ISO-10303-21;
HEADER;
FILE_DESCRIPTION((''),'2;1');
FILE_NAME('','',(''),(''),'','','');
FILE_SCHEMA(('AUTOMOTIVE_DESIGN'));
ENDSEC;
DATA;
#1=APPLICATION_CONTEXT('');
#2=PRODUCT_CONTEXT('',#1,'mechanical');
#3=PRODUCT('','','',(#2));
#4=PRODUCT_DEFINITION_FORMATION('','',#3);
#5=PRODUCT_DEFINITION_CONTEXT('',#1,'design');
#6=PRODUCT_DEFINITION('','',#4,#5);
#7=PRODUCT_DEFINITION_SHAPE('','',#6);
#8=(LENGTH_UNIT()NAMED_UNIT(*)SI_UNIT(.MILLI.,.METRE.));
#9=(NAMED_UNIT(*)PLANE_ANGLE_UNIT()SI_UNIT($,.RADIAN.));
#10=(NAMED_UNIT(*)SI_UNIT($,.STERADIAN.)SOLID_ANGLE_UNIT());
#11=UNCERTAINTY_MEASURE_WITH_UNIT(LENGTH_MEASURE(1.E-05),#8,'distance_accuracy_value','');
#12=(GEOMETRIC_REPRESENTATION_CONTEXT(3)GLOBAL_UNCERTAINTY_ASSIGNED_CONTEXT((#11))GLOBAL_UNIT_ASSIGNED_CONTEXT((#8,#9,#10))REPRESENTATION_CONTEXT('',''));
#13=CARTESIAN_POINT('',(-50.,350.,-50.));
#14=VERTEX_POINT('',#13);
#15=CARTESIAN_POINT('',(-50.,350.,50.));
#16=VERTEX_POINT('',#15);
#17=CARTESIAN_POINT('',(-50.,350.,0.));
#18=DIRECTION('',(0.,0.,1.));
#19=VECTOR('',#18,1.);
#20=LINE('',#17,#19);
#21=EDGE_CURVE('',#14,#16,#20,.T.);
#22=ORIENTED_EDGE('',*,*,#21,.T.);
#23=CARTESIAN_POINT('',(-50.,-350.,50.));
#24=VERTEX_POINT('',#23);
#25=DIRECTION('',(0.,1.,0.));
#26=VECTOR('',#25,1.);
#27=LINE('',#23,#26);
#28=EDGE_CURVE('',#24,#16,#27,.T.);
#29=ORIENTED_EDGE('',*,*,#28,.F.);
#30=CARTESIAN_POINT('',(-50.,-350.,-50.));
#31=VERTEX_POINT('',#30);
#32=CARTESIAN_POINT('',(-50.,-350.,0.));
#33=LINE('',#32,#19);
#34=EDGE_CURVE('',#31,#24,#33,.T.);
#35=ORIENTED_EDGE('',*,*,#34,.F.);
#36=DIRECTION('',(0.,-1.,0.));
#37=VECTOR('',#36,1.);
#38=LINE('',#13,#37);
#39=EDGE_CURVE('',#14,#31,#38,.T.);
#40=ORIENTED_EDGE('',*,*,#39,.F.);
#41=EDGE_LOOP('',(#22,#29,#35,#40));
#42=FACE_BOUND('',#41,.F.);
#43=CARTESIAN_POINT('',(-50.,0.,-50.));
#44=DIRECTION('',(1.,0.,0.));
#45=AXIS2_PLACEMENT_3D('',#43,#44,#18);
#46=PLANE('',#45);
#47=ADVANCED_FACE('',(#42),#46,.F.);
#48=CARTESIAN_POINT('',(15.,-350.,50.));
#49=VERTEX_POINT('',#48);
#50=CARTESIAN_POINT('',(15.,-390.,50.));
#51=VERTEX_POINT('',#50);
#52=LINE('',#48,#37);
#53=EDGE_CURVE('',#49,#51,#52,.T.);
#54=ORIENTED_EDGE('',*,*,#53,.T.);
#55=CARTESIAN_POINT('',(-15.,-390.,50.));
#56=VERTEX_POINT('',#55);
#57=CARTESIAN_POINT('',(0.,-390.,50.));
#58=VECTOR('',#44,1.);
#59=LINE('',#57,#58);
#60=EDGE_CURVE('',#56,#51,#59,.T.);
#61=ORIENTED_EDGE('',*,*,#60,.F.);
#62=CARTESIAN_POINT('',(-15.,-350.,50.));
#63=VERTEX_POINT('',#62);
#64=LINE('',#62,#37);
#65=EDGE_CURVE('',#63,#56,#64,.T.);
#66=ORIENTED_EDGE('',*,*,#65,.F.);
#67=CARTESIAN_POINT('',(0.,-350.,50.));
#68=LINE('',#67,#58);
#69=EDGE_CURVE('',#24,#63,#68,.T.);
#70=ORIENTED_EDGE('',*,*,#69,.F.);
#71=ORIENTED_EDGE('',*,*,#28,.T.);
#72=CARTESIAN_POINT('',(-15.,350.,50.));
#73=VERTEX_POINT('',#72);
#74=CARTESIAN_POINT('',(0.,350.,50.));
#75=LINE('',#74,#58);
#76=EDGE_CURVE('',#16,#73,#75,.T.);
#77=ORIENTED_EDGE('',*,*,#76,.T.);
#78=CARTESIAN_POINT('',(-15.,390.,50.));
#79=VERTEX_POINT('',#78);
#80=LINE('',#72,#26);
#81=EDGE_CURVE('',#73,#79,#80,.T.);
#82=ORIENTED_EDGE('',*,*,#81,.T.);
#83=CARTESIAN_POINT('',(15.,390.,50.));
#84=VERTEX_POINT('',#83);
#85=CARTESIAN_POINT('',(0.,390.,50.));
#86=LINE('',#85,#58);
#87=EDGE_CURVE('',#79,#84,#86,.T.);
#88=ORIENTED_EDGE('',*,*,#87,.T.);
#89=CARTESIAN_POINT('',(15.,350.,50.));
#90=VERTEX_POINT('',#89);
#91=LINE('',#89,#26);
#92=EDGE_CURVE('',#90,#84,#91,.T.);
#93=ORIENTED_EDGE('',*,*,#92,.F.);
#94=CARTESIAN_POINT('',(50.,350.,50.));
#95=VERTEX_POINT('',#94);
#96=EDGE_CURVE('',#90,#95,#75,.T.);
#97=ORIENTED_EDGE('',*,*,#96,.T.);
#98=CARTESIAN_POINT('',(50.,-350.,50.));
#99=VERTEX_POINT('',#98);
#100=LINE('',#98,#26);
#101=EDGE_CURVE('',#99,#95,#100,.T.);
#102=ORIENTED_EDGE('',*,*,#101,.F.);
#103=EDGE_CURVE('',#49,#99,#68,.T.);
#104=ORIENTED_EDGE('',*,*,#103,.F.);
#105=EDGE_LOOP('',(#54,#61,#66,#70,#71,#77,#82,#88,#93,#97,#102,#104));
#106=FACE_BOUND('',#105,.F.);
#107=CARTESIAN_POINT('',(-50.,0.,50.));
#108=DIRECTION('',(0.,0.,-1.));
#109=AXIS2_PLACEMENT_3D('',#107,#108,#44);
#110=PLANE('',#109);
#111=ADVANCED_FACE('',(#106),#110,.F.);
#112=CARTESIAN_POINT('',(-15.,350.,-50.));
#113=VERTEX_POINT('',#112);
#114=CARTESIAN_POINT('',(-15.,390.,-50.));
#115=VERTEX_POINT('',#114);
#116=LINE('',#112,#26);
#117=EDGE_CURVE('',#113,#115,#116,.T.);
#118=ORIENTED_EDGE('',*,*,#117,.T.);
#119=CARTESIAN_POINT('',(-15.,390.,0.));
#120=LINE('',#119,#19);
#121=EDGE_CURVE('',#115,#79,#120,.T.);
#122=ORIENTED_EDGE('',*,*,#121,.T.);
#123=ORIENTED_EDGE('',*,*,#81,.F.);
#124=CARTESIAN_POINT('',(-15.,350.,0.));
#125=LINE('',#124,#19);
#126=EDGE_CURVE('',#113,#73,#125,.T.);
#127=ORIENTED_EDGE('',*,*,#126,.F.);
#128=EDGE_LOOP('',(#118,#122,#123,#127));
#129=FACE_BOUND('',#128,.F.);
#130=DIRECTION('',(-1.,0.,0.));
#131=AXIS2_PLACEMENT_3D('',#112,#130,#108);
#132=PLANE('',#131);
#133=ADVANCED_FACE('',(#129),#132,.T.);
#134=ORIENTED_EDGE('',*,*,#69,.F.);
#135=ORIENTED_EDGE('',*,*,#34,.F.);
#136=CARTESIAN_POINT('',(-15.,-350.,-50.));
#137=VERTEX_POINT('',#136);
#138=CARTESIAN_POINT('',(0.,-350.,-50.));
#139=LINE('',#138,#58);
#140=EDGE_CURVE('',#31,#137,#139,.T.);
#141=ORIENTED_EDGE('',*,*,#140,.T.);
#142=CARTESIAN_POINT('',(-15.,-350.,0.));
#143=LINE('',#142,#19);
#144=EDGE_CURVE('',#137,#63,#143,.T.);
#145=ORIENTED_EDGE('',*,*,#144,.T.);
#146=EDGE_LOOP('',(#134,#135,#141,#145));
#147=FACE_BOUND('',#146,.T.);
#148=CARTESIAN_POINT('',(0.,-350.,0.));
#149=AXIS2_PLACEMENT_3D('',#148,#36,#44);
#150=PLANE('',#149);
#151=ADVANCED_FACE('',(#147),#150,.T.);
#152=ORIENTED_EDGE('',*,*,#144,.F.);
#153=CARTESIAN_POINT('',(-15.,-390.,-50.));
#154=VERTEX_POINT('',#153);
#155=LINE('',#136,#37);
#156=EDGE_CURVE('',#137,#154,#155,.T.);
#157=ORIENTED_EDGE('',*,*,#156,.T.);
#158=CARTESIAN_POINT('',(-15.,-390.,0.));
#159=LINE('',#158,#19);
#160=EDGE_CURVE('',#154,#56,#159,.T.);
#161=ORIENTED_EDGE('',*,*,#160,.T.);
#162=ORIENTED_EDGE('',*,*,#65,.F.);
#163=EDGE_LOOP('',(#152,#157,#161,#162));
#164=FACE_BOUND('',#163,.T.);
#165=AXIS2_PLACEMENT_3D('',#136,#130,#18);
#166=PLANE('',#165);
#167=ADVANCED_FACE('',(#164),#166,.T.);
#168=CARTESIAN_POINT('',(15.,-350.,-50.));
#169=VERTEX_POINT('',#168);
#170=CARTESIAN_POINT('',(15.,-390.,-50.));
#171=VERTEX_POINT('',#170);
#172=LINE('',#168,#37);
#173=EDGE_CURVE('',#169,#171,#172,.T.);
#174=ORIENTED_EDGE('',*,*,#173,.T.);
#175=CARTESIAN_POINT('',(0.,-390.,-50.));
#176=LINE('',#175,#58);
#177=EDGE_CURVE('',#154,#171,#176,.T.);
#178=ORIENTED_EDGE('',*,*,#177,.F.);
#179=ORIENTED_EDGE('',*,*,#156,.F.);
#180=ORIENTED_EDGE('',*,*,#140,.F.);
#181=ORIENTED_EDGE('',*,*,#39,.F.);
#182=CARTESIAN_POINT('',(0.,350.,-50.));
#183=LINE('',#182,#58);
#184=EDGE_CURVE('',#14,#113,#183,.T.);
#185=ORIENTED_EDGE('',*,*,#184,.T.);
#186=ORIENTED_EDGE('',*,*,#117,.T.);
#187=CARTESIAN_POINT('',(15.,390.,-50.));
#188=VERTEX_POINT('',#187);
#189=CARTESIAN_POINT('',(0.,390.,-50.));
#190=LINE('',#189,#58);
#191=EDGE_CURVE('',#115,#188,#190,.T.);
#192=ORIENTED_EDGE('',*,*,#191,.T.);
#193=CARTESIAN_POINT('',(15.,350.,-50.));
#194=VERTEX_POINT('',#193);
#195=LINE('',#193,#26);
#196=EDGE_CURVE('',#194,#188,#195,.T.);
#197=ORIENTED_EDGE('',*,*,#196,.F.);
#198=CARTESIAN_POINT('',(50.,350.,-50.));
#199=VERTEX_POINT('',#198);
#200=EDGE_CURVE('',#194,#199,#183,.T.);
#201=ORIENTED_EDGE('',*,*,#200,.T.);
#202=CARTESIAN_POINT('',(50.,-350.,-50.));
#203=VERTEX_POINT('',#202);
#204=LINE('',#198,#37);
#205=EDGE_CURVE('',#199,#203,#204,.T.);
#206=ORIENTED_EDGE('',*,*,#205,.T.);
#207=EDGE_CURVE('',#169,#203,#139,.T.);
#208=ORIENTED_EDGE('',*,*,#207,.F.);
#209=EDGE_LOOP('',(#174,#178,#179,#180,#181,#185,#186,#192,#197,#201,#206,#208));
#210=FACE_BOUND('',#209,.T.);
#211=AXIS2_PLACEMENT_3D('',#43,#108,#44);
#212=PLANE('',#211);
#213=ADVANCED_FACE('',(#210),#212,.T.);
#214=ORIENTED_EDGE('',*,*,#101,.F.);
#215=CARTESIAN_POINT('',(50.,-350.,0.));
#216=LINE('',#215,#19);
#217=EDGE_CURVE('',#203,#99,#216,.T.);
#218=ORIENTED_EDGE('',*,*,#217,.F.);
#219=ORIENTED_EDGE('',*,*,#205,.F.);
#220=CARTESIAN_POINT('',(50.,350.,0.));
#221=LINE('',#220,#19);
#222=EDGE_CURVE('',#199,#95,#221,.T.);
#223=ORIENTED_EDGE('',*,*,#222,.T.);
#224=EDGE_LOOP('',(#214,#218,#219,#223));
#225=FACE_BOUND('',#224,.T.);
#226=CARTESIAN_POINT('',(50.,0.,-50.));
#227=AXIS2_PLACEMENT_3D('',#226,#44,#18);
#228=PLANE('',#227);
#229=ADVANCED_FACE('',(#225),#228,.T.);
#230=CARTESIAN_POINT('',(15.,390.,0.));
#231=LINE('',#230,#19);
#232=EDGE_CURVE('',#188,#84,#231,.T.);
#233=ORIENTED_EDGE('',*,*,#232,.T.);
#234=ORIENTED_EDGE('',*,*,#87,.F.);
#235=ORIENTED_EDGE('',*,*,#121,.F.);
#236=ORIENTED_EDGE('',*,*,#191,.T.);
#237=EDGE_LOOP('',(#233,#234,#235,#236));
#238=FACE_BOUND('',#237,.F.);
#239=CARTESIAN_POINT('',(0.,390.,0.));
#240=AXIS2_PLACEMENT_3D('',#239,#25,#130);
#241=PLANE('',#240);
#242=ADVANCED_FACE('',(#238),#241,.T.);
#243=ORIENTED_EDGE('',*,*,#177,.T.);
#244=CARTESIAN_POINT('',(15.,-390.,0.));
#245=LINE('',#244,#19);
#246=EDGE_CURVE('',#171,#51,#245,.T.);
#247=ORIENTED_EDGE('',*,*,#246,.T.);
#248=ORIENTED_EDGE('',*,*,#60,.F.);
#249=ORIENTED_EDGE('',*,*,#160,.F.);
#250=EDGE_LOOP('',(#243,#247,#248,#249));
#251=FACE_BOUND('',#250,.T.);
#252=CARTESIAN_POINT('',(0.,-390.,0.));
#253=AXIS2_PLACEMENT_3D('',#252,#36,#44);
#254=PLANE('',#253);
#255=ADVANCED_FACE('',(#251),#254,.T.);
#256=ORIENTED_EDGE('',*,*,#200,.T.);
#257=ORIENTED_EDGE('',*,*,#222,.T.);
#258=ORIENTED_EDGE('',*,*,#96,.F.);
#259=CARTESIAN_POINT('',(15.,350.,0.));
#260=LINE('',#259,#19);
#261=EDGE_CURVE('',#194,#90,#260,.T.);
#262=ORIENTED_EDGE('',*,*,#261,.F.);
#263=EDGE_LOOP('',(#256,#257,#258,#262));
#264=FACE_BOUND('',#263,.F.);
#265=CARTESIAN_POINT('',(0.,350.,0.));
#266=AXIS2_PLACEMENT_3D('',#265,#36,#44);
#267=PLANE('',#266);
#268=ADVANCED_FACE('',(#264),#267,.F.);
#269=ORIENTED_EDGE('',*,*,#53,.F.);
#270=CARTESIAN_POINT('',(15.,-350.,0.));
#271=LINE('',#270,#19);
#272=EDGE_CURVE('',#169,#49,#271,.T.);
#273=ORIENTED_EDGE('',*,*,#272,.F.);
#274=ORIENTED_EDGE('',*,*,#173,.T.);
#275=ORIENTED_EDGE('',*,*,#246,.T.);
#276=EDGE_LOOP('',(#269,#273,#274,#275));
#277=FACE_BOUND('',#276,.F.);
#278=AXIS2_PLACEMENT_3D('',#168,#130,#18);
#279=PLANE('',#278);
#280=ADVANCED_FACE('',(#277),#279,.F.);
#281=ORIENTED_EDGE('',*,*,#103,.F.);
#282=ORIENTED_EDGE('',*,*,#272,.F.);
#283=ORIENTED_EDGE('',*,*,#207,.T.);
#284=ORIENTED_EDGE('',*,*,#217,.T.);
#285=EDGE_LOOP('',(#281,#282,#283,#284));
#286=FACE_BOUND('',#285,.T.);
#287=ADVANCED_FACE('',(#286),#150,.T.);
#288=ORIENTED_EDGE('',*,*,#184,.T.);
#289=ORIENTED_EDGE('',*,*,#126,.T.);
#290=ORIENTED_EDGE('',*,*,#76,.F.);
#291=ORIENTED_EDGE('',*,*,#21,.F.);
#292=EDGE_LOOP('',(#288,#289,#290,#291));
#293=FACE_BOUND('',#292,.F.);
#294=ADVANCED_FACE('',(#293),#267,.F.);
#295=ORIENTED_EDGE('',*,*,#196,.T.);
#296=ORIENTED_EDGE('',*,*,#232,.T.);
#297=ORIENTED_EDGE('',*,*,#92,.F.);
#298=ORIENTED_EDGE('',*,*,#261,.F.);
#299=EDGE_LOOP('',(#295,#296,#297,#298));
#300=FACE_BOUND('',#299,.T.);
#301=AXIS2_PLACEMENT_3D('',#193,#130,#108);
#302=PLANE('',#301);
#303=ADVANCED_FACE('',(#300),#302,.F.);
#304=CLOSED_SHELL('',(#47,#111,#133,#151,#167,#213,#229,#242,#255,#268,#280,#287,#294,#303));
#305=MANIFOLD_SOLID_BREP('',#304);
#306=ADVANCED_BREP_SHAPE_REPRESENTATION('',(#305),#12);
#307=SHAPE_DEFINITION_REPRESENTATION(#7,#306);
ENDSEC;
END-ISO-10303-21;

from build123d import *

# Parameters (mm, degrees)
F2_W     = 100
F2_H     = 100
F3_DEPTH = 350
F4_W     = 30
F4_H     = 100
F5_DEPTH = 40


# Not quite as in the source:
# - a pattern or mirror of a feature is missing from the dataset's text; its kind, count and spacing are read off the source's solid


with BuildPart() as f3:
    # F2 (on Front) → F3 (new body, symmetric)
    with BuildSketch(Plane.XZ):
        Rectangle(F2_W, F2_H)
    extrude(amount=F3_DEPTH, both=True)

    # F4 (on face) → F5 (join)
    with BuildSketch(Plane.XZ.offset(350)):
        Rectangle(F4_W, F4_H)
    f5 = extrude(amount=F5_DEPTH)

    # F5_copies: F5 across plane
    add(f5.mirror(Plane.ZX))


solid = f3.part
